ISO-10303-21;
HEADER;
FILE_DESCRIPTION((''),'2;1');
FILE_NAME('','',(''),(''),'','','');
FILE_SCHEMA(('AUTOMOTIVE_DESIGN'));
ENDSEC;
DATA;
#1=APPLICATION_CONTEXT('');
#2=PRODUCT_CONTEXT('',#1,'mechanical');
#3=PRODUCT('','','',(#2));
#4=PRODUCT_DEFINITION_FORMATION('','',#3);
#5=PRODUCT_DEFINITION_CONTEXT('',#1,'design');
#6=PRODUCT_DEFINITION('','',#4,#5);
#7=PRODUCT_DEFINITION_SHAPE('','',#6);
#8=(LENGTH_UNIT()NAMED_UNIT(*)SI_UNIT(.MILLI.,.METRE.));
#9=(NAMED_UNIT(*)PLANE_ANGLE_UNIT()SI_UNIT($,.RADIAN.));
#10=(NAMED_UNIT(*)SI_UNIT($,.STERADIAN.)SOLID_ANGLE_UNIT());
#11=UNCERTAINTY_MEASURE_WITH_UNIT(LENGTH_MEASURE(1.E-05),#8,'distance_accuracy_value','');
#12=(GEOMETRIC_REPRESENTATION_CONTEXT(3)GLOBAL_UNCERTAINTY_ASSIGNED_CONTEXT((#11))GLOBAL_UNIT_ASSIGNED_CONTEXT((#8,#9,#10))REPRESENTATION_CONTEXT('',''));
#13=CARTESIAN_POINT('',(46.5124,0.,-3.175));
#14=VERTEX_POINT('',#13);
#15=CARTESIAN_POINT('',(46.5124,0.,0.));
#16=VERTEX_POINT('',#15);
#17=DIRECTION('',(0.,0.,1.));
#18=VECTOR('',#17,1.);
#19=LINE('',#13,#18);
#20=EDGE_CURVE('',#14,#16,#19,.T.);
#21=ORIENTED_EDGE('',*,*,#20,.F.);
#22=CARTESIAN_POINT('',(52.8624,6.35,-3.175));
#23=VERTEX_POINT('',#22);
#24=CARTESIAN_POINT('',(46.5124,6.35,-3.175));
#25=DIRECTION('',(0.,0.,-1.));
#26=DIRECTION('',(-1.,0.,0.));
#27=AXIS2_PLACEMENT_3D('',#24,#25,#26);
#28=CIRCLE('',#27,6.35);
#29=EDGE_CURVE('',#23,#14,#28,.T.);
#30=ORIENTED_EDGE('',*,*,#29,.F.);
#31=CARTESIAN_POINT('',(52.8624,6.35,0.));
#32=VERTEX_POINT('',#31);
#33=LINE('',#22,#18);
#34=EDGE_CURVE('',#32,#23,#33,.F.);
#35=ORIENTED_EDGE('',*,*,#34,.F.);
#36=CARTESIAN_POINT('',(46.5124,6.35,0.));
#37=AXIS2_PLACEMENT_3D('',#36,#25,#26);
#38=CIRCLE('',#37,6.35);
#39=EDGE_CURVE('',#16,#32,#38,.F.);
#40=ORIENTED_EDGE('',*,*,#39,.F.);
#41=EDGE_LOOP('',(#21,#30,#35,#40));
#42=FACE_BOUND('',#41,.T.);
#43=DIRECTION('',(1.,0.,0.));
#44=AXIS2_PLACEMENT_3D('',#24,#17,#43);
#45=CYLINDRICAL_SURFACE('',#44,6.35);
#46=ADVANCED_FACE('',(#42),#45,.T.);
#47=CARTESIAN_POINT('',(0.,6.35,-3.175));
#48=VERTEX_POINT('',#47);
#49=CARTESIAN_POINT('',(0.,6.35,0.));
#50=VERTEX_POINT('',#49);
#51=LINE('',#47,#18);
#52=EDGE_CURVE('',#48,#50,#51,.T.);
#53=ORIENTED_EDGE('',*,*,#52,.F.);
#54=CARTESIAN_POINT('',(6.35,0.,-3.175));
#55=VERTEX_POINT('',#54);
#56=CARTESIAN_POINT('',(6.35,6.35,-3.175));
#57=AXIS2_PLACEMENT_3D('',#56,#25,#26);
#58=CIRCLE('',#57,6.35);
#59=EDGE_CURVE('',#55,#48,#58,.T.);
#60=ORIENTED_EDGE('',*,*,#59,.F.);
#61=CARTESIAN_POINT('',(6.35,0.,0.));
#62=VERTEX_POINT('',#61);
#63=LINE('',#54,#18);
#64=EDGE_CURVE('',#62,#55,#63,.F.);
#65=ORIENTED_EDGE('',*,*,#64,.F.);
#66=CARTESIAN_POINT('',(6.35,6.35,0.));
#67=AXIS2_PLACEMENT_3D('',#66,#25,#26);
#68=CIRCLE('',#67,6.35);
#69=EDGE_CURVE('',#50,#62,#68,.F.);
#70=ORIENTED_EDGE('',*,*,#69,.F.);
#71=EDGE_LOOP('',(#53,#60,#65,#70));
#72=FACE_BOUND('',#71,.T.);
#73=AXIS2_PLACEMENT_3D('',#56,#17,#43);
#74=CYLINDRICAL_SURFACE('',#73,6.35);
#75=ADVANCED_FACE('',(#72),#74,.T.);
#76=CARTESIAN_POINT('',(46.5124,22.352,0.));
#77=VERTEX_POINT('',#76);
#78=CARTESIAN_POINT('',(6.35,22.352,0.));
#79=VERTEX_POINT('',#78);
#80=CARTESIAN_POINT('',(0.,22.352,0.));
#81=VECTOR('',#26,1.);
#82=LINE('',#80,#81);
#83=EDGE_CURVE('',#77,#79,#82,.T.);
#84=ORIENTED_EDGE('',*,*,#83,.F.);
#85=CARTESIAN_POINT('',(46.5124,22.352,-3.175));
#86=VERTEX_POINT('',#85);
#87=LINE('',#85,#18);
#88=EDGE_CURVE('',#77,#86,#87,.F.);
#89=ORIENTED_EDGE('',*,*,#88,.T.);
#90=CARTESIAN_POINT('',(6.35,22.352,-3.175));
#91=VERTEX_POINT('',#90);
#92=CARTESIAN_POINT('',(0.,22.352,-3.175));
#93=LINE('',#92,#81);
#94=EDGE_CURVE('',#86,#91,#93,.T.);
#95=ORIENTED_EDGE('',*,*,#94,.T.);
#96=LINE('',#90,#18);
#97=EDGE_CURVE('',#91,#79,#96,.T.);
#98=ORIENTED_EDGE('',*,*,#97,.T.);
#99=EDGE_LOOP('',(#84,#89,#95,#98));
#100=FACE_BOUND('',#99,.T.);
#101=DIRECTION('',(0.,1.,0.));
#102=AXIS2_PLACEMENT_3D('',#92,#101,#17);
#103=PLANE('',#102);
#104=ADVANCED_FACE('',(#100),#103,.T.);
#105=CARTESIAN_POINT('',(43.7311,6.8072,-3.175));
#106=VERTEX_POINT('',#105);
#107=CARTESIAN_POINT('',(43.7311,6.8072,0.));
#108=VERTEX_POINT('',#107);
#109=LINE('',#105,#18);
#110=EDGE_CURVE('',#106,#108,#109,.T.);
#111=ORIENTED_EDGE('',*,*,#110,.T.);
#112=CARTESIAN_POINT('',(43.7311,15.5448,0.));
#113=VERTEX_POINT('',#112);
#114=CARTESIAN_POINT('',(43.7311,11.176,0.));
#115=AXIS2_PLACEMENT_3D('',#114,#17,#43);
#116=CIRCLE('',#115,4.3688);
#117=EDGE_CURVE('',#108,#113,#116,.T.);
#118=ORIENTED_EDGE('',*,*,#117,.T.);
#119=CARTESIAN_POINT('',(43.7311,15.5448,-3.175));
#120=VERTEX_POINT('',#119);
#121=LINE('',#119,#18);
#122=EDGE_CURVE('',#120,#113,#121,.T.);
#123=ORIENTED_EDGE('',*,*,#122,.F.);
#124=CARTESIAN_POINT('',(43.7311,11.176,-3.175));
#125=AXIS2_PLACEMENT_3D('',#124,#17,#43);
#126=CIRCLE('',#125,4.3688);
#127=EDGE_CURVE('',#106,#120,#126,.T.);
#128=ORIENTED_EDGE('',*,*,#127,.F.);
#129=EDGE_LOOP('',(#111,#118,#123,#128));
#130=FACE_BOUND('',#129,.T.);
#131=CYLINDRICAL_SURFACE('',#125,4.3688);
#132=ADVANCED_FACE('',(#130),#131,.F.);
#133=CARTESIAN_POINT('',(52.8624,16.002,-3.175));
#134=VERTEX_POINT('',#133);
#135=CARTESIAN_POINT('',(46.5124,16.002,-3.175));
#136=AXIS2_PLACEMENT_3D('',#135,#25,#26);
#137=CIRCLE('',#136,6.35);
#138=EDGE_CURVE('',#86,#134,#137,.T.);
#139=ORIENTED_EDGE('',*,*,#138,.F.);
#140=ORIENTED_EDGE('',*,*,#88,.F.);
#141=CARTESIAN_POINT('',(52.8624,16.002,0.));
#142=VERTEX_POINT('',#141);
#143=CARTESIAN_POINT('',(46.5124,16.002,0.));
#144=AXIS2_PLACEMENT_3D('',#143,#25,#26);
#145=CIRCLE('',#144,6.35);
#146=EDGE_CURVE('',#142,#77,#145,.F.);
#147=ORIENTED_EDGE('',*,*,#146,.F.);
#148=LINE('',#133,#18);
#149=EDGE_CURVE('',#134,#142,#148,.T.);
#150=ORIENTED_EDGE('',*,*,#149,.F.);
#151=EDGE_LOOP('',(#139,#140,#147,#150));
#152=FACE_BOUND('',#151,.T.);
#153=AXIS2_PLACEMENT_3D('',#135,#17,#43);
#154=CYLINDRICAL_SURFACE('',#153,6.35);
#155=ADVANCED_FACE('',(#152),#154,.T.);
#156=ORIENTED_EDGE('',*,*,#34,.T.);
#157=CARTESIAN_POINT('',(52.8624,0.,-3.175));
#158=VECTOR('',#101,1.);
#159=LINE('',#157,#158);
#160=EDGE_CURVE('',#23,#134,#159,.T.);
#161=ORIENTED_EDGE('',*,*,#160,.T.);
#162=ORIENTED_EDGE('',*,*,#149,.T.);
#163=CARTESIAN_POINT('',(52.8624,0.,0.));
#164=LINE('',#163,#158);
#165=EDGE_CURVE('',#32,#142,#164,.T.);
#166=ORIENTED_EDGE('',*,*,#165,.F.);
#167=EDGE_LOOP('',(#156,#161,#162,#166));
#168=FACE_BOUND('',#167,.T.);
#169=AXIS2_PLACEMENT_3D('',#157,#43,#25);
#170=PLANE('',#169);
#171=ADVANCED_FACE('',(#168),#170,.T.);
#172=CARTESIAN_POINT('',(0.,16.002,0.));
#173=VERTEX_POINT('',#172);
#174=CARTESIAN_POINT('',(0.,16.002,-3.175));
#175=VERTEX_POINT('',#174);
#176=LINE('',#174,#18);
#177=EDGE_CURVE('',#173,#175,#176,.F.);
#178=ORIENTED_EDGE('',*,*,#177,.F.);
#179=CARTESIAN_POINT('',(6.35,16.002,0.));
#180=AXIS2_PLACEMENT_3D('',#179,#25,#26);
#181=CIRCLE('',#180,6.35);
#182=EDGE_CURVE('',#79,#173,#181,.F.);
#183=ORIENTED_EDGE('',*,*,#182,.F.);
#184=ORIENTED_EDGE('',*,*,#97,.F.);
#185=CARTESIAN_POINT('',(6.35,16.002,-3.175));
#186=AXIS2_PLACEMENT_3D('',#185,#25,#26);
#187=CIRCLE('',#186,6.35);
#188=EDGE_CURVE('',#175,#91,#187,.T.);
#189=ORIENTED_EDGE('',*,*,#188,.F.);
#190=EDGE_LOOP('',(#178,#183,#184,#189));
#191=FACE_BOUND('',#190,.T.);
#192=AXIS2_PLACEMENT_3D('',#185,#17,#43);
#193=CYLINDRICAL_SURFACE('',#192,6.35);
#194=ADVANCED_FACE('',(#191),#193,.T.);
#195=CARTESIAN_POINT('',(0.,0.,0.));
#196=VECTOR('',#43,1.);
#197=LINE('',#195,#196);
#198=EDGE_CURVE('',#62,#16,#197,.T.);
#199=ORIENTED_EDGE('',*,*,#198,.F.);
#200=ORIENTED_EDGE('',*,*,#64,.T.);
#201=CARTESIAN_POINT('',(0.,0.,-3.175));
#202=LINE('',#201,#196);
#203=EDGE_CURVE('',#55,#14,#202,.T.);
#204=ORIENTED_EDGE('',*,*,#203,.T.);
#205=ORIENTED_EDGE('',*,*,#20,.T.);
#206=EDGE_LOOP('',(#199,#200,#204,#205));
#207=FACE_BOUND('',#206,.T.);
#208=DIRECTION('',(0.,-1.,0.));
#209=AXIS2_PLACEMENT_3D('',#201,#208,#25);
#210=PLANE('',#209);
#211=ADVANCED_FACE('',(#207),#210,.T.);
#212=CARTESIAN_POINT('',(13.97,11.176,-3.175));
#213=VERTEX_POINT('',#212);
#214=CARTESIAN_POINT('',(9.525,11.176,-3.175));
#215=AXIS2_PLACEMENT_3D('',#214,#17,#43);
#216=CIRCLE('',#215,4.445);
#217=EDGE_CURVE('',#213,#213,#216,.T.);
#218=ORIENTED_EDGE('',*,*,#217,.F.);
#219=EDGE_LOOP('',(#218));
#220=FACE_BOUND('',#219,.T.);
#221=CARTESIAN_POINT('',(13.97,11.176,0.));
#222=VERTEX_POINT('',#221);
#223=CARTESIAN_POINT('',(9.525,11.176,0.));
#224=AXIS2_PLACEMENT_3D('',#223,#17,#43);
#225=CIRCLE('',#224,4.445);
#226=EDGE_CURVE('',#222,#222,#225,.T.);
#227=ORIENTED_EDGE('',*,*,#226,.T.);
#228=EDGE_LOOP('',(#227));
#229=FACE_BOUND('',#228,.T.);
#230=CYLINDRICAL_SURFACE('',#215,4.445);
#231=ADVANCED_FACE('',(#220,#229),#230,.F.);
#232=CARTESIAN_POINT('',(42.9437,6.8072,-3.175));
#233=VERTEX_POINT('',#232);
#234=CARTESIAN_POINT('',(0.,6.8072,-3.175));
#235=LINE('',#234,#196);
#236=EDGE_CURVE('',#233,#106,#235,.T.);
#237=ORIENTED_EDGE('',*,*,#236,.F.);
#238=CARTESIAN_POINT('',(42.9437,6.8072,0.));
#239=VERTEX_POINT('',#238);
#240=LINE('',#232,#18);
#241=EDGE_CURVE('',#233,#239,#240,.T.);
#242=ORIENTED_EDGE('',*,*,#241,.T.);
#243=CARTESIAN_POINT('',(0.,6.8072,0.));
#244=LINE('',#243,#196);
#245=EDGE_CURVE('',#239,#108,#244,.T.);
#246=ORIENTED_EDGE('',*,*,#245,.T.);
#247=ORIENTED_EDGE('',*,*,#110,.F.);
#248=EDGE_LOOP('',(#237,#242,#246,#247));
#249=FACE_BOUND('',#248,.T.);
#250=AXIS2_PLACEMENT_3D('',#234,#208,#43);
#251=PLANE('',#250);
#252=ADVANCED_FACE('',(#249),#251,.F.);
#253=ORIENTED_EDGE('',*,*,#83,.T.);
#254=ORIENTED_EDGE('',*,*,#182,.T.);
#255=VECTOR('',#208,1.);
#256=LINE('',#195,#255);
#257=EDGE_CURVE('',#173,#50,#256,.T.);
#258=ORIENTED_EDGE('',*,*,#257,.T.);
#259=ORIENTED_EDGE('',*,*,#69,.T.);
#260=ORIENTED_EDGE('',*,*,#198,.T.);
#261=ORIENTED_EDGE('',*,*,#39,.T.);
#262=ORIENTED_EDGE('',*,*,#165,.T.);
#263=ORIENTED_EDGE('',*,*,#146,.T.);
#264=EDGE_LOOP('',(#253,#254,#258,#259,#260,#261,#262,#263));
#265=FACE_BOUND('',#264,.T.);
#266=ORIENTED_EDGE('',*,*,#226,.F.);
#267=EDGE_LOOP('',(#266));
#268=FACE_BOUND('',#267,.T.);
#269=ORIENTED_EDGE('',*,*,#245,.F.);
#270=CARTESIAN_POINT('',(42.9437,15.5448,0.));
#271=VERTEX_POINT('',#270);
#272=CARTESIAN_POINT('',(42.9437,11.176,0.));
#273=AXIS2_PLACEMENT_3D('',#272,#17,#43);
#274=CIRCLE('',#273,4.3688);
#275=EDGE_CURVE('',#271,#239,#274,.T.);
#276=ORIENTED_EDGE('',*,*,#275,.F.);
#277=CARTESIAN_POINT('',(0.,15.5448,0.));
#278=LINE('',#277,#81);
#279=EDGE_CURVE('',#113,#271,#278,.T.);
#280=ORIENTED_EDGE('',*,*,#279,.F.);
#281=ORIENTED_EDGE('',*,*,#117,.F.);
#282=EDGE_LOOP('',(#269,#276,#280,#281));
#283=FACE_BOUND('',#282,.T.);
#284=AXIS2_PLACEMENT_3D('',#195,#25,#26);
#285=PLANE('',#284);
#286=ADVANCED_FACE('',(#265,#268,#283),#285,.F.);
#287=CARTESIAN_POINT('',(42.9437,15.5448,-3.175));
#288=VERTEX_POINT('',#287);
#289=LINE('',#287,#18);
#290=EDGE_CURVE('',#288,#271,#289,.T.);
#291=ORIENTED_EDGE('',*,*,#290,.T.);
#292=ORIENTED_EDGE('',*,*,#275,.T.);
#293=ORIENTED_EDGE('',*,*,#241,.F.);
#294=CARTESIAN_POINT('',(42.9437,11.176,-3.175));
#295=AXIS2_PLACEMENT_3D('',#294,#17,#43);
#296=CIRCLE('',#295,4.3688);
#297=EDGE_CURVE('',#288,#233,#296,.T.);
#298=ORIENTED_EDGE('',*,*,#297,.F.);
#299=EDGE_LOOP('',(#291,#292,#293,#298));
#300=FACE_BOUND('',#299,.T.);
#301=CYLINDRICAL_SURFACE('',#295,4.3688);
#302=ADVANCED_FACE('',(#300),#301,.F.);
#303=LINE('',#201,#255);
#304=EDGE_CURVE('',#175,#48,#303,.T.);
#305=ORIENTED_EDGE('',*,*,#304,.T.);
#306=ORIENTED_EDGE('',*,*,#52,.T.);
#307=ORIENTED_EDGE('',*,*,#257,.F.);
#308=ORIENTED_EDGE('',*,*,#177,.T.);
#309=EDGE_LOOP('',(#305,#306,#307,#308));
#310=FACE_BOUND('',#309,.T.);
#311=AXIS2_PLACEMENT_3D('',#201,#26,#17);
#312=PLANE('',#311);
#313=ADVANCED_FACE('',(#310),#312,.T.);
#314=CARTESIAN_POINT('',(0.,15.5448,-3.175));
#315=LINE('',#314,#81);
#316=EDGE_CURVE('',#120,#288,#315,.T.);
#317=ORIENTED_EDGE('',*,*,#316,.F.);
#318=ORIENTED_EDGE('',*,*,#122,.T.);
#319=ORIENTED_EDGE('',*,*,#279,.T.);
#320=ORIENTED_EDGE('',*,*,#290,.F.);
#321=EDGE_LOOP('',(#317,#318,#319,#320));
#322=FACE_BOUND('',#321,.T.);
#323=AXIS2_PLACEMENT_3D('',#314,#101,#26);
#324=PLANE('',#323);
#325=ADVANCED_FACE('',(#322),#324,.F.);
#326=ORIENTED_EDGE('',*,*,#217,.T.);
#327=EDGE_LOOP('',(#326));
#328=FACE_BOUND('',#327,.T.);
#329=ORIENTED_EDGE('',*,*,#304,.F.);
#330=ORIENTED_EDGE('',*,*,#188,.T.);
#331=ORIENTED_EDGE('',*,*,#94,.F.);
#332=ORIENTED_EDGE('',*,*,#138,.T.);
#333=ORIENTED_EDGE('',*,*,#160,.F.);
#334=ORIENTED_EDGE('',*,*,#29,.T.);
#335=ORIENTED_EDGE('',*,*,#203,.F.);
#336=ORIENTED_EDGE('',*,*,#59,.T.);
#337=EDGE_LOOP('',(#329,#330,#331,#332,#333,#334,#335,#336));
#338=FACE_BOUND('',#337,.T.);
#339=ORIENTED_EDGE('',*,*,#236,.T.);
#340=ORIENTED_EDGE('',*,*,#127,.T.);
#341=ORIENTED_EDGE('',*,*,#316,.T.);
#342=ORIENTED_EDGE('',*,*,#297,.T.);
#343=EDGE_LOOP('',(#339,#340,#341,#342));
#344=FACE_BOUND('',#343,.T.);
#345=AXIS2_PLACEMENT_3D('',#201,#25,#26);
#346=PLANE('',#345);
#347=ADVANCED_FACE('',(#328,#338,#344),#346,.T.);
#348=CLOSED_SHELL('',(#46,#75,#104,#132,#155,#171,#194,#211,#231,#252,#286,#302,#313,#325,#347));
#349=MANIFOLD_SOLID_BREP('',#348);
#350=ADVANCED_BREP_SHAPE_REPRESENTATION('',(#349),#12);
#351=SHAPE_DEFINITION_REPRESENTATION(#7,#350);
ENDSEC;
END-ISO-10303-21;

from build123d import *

# Parameters (mm, degrees)
SKETCH1_W          = 52.8624
SKETCH1_H          = 22.352
BASE_FLANGE1_DEPTH = 3.175
SKETCH6_R          = 4.445
CUT_EXTRUDE1_DEPTH = 3.175
FILLET1_R          = 6.35


# Sheet-metal steps are written as plain solids
with BuildPart() as part:
    # Sketch1 → Base-Flange1 (new body)
    with BuildSketch(Plane.XY):
        with Locations((26.4312, 11.176)):
            Rectangle(SKETCH1_W, SKETCH1_H)
    extrude(amount=-BASE_FLANGE1_DEPTH)

    # Sketch6 → Cut-Extrude1 (cut)
    with BuildSketch(Plane.XY):
        with Locations((9.525, 11.176)):
            Circle(SKETCH6_R)
        with BuildLine():
            Line((42.9437, 6.8072), (43.7311, 6.8072))
            ThreePointArc((43.7311, 6.8072), (48.0999, 11.176), (43.7311, 15.5448))
            Line((43.7311, 15.5448), (42.9437, 15.5448))
            ThreePointArc((42.9437, 15.5448), (38.5749, 11.176), (42.9437, 6.8072))
        make_face()
    extrude(amount=-CUT_EXTRUDE1_DEPTH, mode=Mode.SUBTRACT)

    # Fillet1
    fillet1_edges = [part.edges().sort_by_distance(p)[0] for p in [
        (0, 22.352, -1.5875),
        (52.8624, 22.352, -1.5875),
        (52.8624, 0, -1.5875),
        (0, 0, -1.5875),
    ]]
    fillet(fillet1_edges, radius=FILLET1_R)


solid = part.part
